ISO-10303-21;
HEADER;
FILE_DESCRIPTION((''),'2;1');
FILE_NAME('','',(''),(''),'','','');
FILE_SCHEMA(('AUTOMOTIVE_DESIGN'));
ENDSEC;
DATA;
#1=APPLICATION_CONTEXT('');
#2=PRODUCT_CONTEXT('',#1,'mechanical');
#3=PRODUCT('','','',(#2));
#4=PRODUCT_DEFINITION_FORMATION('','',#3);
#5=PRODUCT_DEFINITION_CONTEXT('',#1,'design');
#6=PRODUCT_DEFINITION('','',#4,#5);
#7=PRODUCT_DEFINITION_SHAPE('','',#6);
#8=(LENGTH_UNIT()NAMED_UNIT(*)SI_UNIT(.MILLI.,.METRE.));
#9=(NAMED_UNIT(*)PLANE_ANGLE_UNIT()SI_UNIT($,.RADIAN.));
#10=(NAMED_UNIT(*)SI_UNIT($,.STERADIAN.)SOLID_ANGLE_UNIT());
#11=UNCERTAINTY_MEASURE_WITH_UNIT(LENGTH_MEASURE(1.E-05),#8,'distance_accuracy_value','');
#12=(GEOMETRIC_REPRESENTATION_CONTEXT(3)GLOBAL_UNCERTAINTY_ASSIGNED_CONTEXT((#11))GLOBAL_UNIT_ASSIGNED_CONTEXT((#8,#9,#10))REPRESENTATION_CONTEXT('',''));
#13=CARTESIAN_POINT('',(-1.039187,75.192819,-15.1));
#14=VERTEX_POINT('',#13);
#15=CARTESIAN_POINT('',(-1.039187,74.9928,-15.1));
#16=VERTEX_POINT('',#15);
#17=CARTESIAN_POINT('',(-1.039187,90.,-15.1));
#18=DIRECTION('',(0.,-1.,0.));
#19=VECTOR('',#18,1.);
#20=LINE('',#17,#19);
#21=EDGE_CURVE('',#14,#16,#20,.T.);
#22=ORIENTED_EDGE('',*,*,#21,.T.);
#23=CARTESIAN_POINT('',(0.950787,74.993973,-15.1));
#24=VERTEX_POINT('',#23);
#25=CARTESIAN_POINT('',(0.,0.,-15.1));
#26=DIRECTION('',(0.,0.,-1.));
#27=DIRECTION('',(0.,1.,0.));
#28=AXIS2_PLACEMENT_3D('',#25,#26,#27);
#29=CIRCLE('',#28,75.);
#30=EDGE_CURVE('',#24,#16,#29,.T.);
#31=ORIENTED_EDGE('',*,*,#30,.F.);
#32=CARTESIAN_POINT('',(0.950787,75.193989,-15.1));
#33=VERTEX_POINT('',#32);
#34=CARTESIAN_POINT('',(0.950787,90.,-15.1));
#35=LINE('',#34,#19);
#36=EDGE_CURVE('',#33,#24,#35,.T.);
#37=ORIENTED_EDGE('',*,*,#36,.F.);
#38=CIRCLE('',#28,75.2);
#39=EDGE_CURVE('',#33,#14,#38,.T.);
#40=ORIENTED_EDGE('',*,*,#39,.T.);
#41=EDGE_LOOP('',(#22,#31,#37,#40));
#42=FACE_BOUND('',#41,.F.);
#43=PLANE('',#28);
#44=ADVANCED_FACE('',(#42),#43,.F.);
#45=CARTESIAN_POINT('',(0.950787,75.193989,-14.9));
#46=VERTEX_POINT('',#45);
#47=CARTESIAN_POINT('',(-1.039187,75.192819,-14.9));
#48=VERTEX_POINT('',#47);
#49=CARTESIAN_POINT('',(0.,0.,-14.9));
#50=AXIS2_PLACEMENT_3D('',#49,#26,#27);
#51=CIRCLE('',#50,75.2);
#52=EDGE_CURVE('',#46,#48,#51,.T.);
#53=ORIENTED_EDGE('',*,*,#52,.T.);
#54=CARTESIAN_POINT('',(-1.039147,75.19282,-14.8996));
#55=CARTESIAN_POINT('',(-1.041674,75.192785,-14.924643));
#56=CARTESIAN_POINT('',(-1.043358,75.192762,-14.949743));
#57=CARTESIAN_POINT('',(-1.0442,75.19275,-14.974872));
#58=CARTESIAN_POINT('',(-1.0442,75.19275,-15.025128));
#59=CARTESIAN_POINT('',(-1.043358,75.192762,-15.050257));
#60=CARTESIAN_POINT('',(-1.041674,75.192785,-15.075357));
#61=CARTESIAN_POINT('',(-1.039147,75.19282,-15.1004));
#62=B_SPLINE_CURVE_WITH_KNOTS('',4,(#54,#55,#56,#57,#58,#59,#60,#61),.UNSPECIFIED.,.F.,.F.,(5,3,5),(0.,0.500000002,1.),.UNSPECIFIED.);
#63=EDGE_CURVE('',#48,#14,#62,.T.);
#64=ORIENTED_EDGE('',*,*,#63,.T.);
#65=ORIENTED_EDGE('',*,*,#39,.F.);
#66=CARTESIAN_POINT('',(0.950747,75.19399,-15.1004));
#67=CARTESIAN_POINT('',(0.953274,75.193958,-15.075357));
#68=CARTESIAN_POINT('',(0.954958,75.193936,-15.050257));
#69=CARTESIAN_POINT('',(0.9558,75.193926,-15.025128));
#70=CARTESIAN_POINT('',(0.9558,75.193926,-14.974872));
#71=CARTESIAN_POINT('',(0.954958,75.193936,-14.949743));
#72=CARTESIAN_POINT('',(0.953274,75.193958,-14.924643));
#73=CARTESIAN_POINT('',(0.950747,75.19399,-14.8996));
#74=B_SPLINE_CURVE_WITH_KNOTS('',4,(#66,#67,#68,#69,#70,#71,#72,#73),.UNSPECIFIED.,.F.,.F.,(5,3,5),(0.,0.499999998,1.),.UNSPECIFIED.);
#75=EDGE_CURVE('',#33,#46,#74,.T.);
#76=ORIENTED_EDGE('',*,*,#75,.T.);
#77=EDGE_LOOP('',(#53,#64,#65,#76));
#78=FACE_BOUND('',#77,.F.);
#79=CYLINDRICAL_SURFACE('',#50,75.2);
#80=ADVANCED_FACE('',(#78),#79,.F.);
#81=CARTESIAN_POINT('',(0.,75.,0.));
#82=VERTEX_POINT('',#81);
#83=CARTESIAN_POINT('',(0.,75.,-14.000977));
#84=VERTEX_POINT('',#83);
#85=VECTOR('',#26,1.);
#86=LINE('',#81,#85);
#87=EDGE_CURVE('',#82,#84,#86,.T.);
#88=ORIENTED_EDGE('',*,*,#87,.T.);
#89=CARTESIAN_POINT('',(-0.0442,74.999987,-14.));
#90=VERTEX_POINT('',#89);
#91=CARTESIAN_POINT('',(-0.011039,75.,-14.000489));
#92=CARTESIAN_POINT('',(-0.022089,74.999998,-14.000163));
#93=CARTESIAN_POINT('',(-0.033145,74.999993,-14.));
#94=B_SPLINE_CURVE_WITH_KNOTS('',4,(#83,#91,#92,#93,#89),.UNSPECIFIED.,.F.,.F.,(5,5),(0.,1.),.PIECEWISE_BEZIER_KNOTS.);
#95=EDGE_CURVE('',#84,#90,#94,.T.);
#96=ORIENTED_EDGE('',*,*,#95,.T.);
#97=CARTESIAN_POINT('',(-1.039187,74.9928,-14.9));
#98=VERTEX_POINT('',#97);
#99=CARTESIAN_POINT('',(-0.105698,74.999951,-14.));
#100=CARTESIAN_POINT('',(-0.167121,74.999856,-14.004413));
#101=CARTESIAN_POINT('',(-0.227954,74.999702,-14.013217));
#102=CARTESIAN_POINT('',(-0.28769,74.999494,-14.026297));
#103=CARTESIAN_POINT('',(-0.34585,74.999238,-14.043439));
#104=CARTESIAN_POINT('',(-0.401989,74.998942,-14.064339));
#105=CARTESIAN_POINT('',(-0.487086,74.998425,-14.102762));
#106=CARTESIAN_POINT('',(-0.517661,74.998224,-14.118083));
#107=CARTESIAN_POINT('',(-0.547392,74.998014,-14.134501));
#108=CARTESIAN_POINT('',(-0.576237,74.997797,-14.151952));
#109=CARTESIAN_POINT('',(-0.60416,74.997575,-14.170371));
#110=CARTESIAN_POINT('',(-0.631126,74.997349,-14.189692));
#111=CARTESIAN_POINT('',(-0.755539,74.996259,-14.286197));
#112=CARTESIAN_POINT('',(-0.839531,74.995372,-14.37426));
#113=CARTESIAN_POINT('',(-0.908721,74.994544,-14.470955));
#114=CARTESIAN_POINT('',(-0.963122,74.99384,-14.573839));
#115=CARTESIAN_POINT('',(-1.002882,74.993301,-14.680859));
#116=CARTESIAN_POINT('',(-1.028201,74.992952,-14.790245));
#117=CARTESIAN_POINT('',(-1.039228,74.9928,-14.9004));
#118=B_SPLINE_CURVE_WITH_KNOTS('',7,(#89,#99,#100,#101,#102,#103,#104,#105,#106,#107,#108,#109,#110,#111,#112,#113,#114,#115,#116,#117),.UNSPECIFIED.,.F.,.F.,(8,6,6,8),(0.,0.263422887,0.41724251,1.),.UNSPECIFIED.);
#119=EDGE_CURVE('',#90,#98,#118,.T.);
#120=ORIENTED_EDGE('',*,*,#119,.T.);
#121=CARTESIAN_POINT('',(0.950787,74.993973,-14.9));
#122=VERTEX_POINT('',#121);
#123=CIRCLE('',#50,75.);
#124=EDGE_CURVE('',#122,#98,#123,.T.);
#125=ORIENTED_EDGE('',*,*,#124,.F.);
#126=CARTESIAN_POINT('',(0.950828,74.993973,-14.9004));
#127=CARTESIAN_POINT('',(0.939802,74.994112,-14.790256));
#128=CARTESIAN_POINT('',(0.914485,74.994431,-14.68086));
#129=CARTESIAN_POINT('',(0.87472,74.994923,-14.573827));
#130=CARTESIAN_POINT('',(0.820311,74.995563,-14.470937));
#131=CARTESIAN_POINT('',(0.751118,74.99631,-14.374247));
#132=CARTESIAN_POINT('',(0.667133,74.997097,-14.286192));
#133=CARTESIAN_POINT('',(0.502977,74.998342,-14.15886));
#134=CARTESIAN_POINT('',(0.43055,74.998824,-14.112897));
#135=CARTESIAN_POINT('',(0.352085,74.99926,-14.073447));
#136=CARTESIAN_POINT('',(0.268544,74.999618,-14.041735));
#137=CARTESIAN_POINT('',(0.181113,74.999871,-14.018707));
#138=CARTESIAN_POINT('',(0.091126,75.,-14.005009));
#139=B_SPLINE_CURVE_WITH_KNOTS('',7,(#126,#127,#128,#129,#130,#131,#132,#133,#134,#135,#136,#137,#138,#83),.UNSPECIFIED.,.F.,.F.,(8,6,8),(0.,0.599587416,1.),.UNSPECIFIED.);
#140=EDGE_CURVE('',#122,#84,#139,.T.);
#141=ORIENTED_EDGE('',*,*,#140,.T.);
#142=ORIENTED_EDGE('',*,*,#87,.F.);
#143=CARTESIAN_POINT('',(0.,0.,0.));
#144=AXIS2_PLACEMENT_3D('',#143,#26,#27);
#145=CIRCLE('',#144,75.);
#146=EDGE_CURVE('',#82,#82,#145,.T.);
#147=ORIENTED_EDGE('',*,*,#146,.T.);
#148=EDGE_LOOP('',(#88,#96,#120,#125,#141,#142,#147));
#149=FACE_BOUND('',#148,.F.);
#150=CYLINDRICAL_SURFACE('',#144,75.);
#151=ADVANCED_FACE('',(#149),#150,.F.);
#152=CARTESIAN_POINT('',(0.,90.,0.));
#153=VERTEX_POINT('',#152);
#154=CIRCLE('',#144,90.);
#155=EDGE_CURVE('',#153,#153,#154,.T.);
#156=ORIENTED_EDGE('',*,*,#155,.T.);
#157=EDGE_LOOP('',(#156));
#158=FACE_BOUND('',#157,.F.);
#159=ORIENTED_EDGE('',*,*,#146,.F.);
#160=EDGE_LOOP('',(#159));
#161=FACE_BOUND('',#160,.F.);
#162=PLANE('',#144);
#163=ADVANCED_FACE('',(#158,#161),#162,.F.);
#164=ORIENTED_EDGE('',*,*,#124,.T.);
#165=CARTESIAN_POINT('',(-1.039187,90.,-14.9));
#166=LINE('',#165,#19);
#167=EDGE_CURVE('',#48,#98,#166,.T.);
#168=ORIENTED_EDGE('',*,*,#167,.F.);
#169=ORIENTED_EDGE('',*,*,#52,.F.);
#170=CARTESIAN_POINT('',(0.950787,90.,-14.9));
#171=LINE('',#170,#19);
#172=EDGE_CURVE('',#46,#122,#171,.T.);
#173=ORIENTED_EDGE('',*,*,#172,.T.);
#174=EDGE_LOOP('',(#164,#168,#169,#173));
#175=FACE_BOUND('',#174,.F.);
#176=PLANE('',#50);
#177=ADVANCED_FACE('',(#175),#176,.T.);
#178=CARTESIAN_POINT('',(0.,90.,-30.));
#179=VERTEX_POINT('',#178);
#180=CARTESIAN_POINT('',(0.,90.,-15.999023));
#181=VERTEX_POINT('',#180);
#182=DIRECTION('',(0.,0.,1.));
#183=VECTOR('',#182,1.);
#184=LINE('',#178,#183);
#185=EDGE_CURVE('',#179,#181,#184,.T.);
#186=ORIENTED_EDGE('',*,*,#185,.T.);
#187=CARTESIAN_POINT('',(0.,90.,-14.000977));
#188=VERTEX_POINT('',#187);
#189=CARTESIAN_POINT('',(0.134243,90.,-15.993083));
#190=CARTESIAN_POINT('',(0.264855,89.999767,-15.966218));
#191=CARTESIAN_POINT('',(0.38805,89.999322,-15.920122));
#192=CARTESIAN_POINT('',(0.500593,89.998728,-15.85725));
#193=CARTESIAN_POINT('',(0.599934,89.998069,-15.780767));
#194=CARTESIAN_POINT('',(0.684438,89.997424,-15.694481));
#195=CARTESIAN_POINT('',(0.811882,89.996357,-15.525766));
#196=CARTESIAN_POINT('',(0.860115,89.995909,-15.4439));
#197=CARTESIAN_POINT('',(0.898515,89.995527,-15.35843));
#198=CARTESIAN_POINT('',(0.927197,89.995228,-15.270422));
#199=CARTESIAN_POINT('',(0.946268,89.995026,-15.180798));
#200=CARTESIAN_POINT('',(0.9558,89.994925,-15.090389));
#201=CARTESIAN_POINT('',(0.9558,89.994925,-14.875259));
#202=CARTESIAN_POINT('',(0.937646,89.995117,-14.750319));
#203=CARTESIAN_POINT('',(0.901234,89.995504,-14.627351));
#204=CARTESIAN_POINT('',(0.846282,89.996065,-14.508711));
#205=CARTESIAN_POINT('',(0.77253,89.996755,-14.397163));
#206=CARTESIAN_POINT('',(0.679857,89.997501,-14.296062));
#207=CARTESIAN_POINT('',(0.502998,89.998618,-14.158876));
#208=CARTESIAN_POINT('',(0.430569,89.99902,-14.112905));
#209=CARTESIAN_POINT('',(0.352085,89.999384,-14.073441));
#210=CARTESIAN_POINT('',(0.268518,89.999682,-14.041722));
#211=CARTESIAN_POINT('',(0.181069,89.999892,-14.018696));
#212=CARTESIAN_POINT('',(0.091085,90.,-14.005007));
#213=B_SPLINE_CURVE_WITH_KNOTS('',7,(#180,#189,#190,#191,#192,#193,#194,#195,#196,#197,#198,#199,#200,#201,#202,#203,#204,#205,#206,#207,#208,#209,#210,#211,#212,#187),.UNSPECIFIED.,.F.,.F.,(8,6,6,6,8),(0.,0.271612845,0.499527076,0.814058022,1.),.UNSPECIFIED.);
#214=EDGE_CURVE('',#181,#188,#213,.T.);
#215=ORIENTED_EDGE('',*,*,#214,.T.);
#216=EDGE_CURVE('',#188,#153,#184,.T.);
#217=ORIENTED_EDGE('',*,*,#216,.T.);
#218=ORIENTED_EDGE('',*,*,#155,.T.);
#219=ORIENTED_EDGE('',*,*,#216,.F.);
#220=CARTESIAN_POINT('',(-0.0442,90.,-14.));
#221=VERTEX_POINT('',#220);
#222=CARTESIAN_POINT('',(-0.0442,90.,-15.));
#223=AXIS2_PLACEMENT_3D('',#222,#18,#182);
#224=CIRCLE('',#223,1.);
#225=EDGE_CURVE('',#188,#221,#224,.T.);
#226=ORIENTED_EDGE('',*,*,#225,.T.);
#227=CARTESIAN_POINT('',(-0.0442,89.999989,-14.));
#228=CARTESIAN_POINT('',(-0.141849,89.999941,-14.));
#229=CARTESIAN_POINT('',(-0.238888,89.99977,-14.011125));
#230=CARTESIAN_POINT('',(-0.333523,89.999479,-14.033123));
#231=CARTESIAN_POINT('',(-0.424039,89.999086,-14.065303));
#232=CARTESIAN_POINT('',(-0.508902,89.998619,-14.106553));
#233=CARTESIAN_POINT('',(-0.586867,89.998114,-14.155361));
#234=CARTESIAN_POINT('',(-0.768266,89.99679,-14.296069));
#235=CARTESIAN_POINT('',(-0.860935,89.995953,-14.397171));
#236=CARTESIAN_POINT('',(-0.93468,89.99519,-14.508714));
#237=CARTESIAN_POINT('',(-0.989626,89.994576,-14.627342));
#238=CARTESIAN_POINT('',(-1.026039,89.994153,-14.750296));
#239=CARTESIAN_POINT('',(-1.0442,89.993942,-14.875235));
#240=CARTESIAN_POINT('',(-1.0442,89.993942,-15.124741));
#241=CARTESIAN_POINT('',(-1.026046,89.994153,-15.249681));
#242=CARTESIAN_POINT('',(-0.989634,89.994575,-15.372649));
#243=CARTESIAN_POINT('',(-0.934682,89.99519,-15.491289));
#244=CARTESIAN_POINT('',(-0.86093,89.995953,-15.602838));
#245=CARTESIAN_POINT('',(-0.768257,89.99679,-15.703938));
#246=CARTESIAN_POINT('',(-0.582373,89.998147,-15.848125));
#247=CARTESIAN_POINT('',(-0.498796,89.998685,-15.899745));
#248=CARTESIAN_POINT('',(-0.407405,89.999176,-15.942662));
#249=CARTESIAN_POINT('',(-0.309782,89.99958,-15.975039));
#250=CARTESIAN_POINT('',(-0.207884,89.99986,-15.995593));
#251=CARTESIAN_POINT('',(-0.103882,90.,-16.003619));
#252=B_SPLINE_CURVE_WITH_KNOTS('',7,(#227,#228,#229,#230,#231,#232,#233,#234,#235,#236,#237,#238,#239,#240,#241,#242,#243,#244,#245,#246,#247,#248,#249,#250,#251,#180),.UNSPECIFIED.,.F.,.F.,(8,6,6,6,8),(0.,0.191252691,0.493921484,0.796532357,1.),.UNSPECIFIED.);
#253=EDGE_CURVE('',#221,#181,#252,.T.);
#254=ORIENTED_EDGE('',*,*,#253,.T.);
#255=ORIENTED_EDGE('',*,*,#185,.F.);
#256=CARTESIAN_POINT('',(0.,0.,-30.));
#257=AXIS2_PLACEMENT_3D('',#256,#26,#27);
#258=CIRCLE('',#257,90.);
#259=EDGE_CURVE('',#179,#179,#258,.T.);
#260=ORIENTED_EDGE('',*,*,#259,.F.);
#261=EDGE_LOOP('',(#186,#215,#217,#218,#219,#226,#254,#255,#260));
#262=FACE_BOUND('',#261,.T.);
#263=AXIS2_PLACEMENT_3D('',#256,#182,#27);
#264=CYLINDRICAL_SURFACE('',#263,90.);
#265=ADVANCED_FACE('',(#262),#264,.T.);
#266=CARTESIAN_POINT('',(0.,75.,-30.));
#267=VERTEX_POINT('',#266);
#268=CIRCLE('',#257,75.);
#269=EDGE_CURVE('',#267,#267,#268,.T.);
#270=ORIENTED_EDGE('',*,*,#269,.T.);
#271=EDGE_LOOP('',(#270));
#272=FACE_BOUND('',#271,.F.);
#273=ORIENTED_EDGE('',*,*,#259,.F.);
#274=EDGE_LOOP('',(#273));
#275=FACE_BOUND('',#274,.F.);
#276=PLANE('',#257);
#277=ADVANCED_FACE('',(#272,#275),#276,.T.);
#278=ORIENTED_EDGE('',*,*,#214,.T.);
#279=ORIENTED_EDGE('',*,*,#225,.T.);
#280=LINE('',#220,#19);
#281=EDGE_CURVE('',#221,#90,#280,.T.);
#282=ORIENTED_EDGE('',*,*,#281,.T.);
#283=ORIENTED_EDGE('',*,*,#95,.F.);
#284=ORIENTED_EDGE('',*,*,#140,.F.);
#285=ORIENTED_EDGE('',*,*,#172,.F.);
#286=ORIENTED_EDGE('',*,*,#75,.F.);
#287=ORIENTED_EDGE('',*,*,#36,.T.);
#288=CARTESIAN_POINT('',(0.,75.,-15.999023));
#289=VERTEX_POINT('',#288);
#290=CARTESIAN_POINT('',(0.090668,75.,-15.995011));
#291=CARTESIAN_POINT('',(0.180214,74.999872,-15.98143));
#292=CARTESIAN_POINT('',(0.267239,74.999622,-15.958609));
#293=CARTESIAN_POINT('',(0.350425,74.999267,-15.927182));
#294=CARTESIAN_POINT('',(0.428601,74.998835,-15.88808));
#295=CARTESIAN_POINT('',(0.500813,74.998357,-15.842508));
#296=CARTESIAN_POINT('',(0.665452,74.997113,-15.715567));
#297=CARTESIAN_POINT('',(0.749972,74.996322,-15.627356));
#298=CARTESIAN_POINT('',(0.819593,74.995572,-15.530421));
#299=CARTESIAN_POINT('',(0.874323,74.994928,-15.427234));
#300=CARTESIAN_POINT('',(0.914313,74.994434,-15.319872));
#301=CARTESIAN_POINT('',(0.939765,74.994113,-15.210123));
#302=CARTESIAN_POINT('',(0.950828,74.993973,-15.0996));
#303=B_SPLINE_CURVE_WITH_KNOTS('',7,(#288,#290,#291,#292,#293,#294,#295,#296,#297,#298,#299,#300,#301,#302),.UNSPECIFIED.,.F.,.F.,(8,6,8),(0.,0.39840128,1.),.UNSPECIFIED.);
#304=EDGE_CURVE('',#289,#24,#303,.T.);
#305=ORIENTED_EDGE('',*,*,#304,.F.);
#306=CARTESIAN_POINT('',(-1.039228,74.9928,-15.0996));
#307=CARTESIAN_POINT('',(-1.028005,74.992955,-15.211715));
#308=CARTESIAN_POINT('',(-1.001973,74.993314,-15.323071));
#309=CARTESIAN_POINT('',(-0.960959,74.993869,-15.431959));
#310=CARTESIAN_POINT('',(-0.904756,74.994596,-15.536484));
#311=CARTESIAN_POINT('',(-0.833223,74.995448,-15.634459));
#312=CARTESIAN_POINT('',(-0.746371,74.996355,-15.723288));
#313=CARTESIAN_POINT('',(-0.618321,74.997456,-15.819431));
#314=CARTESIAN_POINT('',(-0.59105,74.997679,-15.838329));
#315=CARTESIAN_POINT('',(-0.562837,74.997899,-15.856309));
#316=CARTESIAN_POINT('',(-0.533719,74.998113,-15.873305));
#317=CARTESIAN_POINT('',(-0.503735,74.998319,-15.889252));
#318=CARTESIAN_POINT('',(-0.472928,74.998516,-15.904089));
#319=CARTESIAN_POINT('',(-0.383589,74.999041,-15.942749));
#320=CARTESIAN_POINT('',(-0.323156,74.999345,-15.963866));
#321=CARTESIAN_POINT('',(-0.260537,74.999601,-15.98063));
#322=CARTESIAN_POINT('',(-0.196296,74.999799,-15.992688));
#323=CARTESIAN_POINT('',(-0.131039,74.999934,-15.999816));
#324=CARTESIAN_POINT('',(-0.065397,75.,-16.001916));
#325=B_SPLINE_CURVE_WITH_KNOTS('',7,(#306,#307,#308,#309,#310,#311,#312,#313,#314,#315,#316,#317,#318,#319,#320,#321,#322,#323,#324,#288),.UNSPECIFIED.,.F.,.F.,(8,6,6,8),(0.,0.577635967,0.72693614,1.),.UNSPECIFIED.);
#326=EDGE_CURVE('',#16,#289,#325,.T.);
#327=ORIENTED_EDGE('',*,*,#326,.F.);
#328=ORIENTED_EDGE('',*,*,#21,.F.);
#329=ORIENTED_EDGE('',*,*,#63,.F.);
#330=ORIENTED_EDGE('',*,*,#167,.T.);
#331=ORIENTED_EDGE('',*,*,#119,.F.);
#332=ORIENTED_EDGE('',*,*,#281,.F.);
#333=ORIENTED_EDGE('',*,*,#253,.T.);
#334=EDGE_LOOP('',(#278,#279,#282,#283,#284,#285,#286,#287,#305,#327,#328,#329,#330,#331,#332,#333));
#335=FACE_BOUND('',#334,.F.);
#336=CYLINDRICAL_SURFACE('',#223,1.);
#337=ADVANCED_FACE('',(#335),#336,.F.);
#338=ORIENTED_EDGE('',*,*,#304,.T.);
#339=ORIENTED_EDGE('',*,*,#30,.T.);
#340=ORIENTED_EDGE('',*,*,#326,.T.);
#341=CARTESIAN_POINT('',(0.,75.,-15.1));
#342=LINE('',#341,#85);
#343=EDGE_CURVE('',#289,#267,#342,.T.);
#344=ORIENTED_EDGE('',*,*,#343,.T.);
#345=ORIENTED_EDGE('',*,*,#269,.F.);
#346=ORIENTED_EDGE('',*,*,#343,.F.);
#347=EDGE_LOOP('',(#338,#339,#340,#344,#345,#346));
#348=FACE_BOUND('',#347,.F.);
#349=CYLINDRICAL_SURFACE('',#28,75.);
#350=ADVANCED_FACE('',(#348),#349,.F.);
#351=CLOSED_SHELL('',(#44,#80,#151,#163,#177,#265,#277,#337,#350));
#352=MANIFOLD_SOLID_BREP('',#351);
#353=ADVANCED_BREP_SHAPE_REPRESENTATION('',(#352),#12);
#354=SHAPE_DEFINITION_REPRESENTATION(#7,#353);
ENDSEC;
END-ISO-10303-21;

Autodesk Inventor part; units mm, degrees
ref_plane "YZ Plane" through (0, 0, 0) normal (1, 0, 0) x (0, 1, 0)
ref_plane "XY Plane" through (0, 0, 0) normal (0, 0, 1) x (1, 0, 0)
sketch "Sketch3" plane through (0, 0, 0) normal (1, 0, 0) x (0, 1, 0)
  line L0 (0, 0) -> (0, -30)
  line L1 (0, -30) -> (90, -30)
  line L2 (90, -30) -> (90, 0)
  line L3 (90, 0) -> (0, 0)
  line L4 (75, 0) -> (75, -14.9)
  line L5 (75, -14.9) -> (75.2, -14.9)
  line L6 (75.2, -14.9) -> (75.2, -15.1)
  line L7 (75.2, -15.1) -> (75, -15.1)
  line L8 (75, -15.1) -> (75, -30)
  dimension "d15" = 0.2
  dimension "d16" = 0.2
  dimension "d17" = 180
  dimension "d18" = 150
  dimension "d19" = 14.9
  dimension "d20" = 30
revolve "Revolution2" add sketch "Sketch3" angle 360 about axis through (0, 0, 0) along (0, 0, -1) contours L3 L2 L1 L8 L7 L6 L5 L4
ref_plane "Work Plane2" through (0, 90, 0) normal (0, 1, 0) x (-1, 0, 0)
sketch "Sketch4" plane through (0, 90, 0) normal (0, 1, 0) x (-1, 0, 0)
  line L0 (-75, -14.9) -> (75, -14.9) projected
  point P0 (0, 0)
  point P1 (0.0442, -15)
  dimension "d24" = 15
hole "Hole2" at (-0.0442, 90, -15) direction (0, -1, 0) diameter 2 depth 30 tip angle 118
properties part number "SFD_CuscinettoRadiale180x150x0.20" material "Stainless Steel"
